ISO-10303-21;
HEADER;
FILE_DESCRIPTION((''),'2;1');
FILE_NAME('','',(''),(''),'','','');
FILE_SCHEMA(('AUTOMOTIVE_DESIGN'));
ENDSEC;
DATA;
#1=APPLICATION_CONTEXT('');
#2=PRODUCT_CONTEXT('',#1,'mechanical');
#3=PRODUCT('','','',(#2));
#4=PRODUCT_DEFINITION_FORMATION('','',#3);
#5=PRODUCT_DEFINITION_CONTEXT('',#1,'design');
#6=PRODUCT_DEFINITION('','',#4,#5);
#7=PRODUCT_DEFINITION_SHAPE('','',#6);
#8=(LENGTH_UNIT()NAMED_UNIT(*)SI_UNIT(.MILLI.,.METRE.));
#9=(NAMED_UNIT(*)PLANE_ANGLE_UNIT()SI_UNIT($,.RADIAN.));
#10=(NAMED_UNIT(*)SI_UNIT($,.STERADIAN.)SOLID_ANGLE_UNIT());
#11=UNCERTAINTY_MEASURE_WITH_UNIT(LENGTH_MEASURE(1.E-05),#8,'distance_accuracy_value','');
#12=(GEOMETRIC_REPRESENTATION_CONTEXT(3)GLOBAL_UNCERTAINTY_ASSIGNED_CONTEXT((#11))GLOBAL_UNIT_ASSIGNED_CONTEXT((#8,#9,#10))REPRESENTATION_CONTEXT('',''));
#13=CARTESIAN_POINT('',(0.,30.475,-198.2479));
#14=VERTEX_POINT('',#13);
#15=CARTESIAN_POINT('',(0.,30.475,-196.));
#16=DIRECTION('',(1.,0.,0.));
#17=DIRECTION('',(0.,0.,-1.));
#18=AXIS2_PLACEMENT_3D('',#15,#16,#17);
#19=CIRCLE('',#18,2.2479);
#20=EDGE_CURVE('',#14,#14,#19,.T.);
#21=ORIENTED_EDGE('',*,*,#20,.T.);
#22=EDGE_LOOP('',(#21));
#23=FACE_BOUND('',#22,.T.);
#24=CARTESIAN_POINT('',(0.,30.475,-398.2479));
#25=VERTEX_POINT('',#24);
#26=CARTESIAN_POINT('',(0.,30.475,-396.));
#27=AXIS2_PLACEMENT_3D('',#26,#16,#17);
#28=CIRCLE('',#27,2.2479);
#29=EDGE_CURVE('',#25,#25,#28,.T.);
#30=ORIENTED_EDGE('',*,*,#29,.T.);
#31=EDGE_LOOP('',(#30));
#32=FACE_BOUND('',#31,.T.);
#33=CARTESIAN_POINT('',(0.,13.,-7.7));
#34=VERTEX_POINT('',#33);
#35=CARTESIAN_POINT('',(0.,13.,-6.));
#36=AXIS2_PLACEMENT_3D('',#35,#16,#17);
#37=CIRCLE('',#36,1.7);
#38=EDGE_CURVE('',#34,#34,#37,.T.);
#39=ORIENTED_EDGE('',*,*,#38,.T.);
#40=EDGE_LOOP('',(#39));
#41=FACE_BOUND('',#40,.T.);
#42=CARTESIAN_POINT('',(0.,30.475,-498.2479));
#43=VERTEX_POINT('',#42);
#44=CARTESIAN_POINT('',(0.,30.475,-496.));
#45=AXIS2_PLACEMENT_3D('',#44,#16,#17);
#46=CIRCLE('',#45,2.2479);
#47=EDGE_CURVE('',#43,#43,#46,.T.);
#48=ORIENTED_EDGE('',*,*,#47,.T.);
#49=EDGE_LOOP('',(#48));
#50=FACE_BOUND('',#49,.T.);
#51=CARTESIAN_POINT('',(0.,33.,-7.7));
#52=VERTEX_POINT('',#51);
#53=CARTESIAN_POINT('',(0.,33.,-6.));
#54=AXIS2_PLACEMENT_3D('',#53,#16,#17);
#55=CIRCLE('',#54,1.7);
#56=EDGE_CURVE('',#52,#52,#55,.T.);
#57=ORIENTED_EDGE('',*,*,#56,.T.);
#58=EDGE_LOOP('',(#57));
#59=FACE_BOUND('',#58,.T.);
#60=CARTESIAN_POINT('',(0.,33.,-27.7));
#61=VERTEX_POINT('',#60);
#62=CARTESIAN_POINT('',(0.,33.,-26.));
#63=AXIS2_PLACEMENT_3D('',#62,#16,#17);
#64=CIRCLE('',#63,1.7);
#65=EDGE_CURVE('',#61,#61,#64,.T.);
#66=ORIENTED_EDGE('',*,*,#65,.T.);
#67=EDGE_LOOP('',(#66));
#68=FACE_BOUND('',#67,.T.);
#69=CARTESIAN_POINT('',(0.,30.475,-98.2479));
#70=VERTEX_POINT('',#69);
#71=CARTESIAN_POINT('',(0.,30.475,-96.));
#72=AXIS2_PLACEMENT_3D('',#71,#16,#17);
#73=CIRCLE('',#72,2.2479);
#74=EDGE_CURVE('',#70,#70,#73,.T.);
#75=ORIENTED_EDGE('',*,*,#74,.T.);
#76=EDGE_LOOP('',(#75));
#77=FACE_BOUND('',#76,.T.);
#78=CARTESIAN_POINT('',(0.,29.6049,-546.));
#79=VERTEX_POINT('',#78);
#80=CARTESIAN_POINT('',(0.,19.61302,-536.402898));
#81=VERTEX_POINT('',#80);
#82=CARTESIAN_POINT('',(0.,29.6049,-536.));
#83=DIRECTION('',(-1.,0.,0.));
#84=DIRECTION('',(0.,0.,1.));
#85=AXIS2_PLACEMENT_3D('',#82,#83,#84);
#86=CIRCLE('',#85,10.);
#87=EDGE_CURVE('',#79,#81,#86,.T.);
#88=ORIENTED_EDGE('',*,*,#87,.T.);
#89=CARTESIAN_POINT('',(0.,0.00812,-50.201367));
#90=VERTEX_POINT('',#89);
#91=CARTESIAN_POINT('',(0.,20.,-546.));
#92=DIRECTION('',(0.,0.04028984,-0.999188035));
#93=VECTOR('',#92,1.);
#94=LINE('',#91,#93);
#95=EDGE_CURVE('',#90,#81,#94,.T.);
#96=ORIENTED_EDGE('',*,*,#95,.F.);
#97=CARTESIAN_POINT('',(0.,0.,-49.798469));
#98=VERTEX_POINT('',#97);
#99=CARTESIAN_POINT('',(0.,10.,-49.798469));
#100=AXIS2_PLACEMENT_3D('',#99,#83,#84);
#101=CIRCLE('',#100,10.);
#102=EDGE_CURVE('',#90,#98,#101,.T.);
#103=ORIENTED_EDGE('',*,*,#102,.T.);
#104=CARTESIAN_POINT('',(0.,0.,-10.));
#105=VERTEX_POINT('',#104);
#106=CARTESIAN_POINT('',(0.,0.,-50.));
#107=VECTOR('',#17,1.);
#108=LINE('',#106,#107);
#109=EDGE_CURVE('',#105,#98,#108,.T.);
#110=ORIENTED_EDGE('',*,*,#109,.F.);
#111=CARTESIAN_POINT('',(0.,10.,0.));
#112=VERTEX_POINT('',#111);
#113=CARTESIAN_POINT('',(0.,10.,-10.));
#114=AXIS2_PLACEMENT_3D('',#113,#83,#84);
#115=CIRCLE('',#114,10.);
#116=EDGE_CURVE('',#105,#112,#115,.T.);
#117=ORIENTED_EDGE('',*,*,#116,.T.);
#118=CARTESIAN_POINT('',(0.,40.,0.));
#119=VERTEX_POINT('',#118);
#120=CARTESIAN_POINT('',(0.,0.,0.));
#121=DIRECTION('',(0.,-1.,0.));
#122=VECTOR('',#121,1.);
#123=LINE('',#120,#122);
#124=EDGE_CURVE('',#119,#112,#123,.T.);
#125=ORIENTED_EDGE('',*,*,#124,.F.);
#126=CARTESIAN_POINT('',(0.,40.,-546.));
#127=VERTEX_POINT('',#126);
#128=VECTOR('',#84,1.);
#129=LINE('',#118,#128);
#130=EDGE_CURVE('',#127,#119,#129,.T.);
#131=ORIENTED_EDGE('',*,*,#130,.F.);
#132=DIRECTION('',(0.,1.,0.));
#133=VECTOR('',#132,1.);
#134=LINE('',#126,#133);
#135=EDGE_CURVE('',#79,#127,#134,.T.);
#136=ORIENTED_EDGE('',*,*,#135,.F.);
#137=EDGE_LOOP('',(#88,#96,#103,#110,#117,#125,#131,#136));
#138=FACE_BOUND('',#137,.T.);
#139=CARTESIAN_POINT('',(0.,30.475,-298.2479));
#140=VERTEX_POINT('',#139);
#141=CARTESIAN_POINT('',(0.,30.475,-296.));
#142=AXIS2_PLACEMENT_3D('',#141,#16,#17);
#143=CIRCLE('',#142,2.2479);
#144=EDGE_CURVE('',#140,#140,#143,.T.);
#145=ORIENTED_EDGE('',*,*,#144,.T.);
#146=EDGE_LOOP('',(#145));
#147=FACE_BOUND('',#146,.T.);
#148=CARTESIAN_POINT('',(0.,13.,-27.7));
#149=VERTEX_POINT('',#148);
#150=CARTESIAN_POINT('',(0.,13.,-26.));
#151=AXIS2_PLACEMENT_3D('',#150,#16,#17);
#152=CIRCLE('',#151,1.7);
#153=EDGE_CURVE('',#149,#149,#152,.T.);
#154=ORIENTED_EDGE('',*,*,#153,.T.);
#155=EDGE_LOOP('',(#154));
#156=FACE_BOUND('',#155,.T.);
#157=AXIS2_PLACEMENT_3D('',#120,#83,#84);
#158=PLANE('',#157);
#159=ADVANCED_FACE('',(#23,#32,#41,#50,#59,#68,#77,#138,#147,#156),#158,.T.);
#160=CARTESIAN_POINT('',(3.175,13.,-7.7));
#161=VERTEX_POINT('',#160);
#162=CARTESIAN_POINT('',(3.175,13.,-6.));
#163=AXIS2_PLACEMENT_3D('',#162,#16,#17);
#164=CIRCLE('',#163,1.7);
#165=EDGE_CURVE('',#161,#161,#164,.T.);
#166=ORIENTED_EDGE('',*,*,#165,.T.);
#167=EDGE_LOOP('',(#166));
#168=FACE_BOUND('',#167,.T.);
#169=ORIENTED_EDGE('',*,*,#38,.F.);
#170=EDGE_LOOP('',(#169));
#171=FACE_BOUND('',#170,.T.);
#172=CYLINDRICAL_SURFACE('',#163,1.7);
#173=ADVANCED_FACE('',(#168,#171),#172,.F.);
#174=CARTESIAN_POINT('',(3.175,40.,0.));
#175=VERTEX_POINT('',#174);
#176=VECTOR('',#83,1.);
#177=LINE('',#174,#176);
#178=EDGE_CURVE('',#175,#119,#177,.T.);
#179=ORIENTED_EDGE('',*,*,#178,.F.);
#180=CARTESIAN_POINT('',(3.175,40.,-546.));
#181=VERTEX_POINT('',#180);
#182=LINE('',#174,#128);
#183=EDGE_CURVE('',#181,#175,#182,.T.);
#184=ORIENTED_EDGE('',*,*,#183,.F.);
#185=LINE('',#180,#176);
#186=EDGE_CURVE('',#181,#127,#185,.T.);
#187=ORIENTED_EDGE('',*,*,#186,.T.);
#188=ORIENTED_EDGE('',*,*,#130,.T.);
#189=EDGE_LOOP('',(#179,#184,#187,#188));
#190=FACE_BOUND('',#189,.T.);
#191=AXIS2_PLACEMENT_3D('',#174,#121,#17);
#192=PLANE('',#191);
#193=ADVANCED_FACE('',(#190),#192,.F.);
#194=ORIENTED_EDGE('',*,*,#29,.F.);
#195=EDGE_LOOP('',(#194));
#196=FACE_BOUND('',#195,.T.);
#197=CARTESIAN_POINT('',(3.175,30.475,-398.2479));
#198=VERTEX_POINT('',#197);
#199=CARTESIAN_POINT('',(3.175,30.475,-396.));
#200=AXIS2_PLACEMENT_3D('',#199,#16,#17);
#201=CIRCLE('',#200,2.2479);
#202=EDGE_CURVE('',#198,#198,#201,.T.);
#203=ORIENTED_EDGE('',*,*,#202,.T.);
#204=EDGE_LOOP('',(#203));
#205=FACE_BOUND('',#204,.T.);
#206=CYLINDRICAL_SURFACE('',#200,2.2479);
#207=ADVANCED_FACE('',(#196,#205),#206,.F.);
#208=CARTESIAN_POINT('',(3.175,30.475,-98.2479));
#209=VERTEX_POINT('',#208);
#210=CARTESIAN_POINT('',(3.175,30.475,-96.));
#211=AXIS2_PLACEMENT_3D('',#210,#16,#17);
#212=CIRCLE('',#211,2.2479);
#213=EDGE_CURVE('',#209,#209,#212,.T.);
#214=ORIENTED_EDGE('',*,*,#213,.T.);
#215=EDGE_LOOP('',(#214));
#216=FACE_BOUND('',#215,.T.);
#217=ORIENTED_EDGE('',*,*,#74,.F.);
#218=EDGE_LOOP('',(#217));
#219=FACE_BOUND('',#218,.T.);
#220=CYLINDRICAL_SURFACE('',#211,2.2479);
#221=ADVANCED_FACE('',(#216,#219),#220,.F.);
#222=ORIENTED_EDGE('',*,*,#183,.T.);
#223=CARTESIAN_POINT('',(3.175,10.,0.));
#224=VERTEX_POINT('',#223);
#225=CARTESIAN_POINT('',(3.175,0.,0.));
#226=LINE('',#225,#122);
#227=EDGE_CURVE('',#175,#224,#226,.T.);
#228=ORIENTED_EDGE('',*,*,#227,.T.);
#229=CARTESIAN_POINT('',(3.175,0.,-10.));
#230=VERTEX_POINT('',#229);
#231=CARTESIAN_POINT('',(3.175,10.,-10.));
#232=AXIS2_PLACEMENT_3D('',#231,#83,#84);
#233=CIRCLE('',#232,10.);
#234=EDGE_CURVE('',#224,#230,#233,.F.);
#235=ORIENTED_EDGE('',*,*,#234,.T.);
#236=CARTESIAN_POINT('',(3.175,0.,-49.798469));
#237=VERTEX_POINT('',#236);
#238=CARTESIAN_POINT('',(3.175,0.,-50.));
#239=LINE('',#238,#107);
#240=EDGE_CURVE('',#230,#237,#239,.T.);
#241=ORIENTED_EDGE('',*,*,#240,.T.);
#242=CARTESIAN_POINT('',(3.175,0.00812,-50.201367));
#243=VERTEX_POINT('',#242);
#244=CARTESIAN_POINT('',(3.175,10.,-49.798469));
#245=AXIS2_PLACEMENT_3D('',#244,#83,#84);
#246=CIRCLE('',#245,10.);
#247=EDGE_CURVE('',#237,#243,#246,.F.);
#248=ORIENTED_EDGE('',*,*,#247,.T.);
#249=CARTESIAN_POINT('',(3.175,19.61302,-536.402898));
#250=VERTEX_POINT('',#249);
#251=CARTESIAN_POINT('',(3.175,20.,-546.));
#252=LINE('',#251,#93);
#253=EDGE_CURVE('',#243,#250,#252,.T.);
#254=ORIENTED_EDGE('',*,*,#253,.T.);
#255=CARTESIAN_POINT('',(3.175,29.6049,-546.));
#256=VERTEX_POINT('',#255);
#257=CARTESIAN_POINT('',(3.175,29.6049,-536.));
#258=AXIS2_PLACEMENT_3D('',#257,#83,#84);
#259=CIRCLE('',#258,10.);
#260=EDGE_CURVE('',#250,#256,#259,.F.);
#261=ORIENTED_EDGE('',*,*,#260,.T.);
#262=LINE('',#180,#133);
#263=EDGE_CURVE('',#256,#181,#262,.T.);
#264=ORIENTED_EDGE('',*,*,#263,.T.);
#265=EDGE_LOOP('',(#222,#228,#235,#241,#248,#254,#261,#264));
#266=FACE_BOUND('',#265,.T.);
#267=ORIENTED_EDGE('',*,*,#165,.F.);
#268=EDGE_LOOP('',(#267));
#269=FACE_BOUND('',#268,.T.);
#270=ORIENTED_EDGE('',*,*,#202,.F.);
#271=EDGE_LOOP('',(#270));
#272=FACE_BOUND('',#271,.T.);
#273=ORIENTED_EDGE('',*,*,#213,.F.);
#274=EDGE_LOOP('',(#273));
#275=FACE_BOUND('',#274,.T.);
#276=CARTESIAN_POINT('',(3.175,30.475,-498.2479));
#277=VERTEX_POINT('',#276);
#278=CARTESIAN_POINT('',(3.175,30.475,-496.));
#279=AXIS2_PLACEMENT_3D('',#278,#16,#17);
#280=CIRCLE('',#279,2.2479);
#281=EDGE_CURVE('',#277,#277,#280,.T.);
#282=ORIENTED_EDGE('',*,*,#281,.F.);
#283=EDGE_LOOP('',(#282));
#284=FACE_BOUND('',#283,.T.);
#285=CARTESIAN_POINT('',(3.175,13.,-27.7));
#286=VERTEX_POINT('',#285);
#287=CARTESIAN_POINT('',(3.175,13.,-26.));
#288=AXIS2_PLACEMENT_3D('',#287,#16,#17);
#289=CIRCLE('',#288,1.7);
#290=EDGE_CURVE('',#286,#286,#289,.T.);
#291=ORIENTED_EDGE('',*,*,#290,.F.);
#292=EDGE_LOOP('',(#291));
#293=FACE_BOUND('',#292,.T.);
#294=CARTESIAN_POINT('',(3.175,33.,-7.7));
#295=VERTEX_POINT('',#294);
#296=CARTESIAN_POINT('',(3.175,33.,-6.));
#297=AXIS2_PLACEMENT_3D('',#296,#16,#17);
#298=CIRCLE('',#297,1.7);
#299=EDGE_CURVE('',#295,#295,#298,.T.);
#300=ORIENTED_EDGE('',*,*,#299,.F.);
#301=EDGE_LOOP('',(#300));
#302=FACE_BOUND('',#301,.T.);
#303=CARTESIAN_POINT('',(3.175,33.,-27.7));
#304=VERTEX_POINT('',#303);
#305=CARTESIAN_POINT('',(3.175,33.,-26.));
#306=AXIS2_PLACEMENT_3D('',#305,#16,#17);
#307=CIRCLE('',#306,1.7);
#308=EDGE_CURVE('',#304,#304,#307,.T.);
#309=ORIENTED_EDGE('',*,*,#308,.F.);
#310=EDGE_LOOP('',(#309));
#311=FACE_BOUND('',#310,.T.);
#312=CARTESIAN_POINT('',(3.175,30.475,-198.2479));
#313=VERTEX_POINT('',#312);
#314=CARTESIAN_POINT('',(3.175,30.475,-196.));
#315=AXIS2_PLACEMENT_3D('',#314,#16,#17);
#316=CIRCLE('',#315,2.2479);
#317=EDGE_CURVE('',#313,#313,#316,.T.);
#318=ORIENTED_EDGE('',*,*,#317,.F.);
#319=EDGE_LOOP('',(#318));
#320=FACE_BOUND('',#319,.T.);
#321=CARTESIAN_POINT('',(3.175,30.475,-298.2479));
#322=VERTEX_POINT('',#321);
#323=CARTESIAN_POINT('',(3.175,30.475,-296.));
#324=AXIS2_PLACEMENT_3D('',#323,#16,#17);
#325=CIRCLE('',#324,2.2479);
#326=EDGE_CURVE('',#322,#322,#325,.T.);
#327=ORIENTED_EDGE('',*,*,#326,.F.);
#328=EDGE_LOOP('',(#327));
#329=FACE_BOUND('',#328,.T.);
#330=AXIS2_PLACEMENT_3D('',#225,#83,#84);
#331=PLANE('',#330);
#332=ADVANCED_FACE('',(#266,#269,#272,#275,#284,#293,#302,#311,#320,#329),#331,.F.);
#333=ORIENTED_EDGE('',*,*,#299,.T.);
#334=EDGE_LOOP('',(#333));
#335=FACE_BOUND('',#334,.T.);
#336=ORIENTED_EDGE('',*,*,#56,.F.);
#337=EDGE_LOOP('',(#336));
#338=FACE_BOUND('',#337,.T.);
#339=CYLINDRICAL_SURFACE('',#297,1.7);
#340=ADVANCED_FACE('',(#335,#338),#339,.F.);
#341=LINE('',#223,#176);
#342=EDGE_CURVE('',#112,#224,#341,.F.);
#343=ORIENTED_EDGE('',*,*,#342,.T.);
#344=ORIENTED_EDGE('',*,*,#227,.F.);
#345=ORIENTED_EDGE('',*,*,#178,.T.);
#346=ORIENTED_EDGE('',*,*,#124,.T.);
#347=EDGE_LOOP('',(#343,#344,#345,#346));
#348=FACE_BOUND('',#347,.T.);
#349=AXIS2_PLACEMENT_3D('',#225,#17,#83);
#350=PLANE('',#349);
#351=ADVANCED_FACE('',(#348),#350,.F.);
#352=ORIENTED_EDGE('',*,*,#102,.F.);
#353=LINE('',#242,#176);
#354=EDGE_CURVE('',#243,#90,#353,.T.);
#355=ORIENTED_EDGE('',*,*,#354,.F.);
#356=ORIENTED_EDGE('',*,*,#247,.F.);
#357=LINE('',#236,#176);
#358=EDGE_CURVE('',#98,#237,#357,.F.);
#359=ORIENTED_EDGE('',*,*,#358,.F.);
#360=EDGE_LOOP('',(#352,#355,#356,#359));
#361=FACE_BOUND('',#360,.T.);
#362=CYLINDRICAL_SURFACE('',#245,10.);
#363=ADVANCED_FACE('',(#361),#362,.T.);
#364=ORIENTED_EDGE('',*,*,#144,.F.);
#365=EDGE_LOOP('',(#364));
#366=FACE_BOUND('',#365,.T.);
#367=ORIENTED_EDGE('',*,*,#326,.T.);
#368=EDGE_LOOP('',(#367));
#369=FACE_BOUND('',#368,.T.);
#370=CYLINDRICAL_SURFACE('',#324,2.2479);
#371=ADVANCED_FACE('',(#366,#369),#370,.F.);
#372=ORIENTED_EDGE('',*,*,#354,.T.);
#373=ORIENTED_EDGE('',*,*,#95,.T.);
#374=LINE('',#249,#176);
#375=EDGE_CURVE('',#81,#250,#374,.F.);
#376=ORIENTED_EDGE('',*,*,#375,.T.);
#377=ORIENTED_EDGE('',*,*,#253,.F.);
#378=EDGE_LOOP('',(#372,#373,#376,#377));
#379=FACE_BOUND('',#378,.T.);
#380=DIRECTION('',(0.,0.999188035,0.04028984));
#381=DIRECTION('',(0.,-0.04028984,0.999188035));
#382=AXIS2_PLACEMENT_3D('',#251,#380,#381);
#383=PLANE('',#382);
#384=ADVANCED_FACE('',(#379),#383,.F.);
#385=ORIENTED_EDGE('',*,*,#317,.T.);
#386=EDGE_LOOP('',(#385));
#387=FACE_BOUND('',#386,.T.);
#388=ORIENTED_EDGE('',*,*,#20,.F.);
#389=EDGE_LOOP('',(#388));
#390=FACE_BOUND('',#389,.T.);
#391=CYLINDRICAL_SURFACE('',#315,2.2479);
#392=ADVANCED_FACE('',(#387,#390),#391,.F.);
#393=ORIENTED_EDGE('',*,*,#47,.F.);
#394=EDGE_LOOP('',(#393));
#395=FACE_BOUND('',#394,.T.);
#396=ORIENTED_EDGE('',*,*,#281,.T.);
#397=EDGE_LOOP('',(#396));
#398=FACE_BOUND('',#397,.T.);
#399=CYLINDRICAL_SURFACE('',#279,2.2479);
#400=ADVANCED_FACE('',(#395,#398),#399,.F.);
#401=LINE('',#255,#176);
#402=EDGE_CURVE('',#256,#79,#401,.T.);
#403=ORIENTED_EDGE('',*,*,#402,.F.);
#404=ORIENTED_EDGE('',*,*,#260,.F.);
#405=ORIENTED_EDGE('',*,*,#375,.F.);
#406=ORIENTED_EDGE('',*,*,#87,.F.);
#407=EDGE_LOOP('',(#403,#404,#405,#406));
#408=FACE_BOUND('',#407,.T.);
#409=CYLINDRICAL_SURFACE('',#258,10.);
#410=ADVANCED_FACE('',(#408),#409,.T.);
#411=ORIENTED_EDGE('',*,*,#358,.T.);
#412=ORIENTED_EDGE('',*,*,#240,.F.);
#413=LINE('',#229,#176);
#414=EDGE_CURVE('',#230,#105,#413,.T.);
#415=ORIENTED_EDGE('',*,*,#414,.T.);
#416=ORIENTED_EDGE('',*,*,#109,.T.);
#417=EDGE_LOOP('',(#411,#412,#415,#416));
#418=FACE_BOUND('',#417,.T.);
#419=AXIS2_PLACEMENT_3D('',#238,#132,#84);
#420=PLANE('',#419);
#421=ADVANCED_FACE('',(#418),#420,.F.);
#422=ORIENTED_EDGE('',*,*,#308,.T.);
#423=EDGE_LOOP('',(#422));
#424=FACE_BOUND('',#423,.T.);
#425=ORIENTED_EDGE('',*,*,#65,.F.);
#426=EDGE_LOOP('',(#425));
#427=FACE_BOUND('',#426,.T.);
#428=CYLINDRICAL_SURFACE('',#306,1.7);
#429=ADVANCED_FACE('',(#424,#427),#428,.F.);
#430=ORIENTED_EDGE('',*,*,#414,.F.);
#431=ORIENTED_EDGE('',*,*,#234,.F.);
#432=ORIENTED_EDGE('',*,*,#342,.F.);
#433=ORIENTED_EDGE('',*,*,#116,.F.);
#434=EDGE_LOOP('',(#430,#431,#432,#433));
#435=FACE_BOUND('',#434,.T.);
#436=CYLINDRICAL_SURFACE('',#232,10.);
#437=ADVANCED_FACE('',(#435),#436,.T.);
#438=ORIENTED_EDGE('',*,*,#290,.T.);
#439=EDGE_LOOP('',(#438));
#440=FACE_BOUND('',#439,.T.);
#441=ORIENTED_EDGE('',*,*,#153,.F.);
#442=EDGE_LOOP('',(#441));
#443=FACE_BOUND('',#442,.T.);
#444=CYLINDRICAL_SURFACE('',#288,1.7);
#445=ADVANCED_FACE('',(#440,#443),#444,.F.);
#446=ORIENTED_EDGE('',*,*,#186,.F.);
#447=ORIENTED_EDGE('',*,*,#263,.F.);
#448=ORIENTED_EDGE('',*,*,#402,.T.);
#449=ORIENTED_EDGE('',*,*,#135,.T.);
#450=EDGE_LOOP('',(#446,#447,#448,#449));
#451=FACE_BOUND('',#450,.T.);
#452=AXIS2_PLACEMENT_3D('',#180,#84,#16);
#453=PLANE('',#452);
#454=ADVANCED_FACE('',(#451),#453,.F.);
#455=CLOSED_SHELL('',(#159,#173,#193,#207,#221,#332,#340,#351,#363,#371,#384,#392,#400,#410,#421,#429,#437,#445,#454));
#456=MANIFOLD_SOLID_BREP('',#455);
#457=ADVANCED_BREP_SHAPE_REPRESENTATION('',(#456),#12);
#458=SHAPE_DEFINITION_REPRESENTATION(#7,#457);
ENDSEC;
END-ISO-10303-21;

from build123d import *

# Parameters (mm, degrees)
BOSS_EXTRUDE1_DEPTH   = 3.175
M3_CLEARANCE_HOLE1_D  = 3.4
FILLET1_R             = 10
F_8_CLEARANCE_HOLE1_D = 4.4958
LPATTERN1_COUNT       = 5
LPATTERN1_PITCH       = 100


with BuildPart() as part:
    # Sketch1 → Boss-Extrude1 (new body)
    with BuildSketch(Plane(origin=(0, 0, 0), x_dir=(0, 0, -1), z_dir=(1, 0, 0))):
        Polygon((0, 0), (0, 40), (546, 40), (546, 20), (50, 0), align=None)
    extrude(amount=BOSS_EXTRUDE1_DEPTH)

    # M3 Clearance Hole1 (through all)
    with Locations(Plane(origin=(3.175, 33, -26), x_dir=(0, 0, 1), z_dir=(1, 0, 0))):
        with Locations((0, 0), (20, 0), (0, 20), (20, 20)):
            Hole(M3_CLEARANCE_HOLE1_D / 2)

    # Fillet1
    # the kernel refuses this fillet: 10 mm, written as the material it takes off along each edge
    with BuildSketch(Plane(origin=(-25, 0, 0), x_dir=(0, 1, 0), z_dir=(1, 0, 0))) as fillet1_piece_1:
        with BuildLine():
            CenterArc((FILLET1_R, -FILLET1_R), FILLET1_R, 90, 90)
            Line((0, -FILLET1_R), (0, 0))
            Line((0, 0), (FILLET1_R, 0))
        make_face()
    extrude(amount=53.175, mode=Mode.SUBTRACT)
    with BuildSketch(Plane(origin=(-24.012251111, 20, -546), x_dir=(0, -0.04028984011081184, 0.9991880347481376), z_dir=(1, 0, 0))) as fillet1_piece_2:
        with BuildLine():
            CenterArc((FILLET1_R * 0.96049004443, -FILLET1_R), FILLET1_R, 90, 87.690937211)
            Line((-FILLET1_R * 0.0386979903181, -FILLET1_R * 0.959710159889), (0, 0))
            Line((0, 0), (FILLET1_R * 0.96049004443, 0))
        make_face()
    extrude(amount=51.199502222, mode=Mode.SUBTRACT)
    with BuildSketch(Plane(origin=(-0.503827547, 0, -50), x_dir=(0, 0, 1), z_dir=(1, 0, 0))) as fillet1_piece_3:
        with BuildLine():
            CenterArc((FILLET1_R * 0.0201531018646, -FILLET1_R), FILLET1_R, 90, 2.309062789)
            Line((-FILLET1_R * 0.0201367382462, -FILLET1_R * 0.000811965251862), (0, 0))
            Line((0, 0), (FILLET1_R * 0.0201531018646, 0))
        make_face()
    extrude(amount=4.182655093, mode=Mode.SUBTRACT)

    # #8 Clearance Hole1 (through all)
    with Locations(Plane(origin=(3.175, 30.475, -496), x_dir=(0, 0, 1), z_dir=(1, 0, 0))):
        with Locations((0, 0)):
            f_8_clearance_hole1 = Hole(F_8_CLEARANCE_HOLE1_D / 2)

    # LPattern1: #8 Clearance Hole1 ×5
    with Locations(*[(0, 0, i * LPATTERN1_PITCH) for i in range(1, LPATTERN1_COUNT)]):
        add(f_8_clearance_hole1, mode=Mode.SUBTRACT)


solid = part.part
